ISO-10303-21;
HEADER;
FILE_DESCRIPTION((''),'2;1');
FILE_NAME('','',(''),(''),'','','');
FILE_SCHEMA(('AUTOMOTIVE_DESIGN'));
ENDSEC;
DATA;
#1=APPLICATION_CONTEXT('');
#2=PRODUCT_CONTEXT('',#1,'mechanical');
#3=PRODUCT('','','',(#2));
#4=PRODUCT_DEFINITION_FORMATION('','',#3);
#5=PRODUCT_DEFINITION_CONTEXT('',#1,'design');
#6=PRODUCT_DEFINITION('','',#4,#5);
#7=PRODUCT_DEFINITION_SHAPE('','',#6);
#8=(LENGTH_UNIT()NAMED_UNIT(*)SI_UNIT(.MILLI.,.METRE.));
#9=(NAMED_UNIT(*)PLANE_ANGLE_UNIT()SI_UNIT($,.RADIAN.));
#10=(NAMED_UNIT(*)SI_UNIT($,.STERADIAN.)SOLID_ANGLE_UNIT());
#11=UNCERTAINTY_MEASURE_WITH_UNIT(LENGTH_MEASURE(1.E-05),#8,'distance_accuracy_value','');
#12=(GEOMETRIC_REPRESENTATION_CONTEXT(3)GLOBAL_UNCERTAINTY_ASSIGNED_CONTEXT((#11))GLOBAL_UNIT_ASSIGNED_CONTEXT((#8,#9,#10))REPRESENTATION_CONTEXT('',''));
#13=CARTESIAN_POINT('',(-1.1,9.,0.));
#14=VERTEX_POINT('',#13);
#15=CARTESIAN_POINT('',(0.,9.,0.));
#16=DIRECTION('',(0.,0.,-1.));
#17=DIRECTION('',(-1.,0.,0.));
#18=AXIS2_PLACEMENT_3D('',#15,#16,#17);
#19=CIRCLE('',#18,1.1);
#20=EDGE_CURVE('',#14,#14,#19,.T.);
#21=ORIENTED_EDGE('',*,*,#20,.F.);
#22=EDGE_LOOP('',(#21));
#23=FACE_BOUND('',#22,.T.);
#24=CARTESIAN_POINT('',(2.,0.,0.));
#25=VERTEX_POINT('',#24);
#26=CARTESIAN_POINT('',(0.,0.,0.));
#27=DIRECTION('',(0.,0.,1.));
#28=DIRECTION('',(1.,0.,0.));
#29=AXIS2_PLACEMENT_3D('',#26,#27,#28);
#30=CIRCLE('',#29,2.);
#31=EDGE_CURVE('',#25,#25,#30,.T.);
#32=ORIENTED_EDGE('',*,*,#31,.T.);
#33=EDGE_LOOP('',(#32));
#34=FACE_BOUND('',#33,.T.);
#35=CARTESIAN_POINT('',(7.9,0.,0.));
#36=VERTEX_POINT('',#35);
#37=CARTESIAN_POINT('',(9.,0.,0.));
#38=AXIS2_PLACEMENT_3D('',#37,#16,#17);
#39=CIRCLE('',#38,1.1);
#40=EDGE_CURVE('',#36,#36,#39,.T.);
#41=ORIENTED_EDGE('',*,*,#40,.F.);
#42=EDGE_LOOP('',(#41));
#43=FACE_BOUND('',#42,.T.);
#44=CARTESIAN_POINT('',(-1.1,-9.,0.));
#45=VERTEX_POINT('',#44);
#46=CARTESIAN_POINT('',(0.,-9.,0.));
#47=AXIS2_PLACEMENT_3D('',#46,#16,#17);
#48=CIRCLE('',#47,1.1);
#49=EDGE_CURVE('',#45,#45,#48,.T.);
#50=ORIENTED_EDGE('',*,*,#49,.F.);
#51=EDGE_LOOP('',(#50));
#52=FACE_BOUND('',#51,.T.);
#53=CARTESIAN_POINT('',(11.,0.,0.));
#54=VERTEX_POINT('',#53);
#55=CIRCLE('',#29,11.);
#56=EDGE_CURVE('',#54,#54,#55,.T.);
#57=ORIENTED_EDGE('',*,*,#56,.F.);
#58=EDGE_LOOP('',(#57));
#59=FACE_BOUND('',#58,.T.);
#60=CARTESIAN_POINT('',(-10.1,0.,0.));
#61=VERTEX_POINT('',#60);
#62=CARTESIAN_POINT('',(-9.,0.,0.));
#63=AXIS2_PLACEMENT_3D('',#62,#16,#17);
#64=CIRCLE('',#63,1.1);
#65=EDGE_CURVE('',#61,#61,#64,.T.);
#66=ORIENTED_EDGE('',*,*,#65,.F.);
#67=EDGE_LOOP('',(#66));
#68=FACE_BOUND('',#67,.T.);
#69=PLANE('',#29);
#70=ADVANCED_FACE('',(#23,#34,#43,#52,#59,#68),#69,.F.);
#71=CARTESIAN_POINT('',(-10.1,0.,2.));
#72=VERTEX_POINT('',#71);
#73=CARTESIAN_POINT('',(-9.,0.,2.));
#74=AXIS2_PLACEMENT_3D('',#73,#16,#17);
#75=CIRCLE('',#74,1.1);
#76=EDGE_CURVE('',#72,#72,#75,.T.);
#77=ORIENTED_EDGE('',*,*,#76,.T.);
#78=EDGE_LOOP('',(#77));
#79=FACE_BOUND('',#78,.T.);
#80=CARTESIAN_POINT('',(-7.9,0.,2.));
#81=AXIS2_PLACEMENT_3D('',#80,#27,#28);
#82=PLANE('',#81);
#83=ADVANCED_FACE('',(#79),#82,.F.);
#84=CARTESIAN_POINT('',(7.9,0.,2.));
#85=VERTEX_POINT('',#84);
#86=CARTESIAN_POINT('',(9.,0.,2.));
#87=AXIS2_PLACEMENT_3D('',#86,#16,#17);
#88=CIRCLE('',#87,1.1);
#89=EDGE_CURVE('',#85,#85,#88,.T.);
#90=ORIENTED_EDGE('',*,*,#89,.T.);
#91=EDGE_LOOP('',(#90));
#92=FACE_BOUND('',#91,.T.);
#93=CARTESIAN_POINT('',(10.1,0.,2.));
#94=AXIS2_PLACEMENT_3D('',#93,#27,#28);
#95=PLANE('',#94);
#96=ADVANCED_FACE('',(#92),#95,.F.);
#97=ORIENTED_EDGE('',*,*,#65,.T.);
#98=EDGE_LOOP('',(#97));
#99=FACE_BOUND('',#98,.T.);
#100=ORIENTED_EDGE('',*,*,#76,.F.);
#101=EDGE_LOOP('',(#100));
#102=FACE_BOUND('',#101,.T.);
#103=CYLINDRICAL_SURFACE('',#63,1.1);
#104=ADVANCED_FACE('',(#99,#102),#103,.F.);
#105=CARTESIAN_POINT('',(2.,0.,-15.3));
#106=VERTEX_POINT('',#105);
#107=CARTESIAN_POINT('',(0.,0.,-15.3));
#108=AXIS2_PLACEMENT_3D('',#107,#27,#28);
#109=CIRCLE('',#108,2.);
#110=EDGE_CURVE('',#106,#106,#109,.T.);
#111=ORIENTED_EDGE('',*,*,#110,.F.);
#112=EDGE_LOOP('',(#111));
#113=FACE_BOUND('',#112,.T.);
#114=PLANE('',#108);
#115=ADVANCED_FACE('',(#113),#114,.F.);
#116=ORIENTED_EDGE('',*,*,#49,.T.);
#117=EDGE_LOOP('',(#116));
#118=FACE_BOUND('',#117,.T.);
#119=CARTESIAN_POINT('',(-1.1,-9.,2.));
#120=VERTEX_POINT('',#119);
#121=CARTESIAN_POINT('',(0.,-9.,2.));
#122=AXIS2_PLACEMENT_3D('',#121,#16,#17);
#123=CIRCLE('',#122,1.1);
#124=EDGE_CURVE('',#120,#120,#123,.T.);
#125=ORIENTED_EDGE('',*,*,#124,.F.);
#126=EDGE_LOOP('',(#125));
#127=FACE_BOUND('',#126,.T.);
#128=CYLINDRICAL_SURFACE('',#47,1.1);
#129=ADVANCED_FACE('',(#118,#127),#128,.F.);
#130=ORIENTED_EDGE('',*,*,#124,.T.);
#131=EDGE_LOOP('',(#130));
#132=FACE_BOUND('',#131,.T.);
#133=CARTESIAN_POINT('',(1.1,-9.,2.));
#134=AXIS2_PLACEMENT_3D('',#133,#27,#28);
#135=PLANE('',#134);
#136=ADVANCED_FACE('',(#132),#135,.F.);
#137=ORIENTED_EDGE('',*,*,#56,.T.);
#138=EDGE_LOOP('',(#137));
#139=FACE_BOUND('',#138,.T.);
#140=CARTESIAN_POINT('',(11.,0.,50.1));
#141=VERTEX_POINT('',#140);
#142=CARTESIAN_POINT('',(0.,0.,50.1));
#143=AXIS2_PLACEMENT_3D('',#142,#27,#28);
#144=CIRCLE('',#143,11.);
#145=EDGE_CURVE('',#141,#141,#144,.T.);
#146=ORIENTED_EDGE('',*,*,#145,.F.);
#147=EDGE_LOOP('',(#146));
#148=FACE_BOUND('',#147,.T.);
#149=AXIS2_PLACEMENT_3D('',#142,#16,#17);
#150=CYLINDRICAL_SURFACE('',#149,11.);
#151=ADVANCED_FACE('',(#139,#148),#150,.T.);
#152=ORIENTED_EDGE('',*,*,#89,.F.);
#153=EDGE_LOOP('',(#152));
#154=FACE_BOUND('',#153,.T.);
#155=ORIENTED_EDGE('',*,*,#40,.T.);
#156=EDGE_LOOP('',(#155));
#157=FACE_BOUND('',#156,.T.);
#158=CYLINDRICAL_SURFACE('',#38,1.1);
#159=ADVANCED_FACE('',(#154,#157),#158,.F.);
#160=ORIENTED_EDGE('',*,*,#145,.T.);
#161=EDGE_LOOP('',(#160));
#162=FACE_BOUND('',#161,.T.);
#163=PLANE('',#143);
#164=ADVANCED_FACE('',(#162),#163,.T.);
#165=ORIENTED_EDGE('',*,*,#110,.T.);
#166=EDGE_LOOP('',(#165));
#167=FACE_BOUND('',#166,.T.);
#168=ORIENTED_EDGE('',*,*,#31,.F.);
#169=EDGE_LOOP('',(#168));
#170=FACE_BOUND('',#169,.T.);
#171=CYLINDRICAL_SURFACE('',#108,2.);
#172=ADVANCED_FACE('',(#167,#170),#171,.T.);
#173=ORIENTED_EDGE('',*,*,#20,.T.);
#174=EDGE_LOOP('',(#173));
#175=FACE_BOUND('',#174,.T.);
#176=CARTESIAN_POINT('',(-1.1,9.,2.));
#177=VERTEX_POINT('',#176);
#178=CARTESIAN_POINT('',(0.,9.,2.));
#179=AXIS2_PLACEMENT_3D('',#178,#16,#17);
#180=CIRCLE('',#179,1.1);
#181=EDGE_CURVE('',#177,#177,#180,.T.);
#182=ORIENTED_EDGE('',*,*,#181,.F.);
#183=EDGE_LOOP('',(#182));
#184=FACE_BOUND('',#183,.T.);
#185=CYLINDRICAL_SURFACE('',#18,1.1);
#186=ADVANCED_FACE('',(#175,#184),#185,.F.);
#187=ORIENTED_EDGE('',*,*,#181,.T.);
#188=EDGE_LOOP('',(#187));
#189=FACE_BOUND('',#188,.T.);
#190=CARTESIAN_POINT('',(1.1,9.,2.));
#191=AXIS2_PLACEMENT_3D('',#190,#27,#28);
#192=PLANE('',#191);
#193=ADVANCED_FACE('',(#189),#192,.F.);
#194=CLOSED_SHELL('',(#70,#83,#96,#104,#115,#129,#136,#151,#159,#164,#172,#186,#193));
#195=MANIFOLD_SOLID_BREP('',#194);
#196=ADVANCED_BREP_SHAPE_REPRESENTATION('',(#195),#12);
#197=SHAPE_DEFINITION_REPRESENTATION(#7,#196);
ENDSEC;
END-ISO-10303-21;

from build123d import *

# Parameters (mm, degrees)
SKETCH1_R               = 10.999999971
SKETCH1_R_2             = 2
BOSS_EXTRUDE4_DEPTH     = 50.1
SKETCH1_6_R             = 2
BOSS_EXTRUDE5_DEPTH     = 15.3
ADVANCEDHOLE1_OUTLINE_R = 1.1
ADVANCEDHOLE1_DEPTH     = 2


# Read off the part's stored shape, not the designer's step: AdvancedHole1
with BuildPart() as part:
    # Sketch1 → Boss-Extrude4 (new body)
    # profile 1 of 2: a face of its own
    with BuildSketch(Plane.XY):
        Circle(SKETCH1_R)
        Circle(SKETCH1_R_2, mode=Mode.SUBTRACT)
    # profile 2 of 2: a face of its own
    with BuildSketch(Plane.XY):
        Circle(SKETCH1_R_2)
    extrude(amount=BOSS_EXTRUDE4_DEPTH)

    # Sketch1<6> → Boss-Extrude5 (add)
    with BuildSketch(Plane.XY):
        Circle(SKETCH1_6_R)
    extrude(amount=-BOSS_EXTRUDE5_DEPTH)

    # AdvancedHole1 outline → AdvancedHole1 (cut)
    with BuildSketch(Plane.XY):
        with Locations((0, -9)):
            Circle(ADVANCEDHOLE1_OUTLINE_R)
        with Locations((-9, 0)):
            Circle(ADVANCEDHOLE1_OUTLINE_R)
        with Locations((0, 9)):
            Circle(ADVANCEDHOLE1_OUTLINE_R)
        with Locations((9, 0)):
            Circle(ADVANCEDHOLE1_OUTLINE_R)
    extrude(amount=ADVANCEDHOLE1_DEPTH, mode=Mode.SUBTRACT)


solid = part.part
